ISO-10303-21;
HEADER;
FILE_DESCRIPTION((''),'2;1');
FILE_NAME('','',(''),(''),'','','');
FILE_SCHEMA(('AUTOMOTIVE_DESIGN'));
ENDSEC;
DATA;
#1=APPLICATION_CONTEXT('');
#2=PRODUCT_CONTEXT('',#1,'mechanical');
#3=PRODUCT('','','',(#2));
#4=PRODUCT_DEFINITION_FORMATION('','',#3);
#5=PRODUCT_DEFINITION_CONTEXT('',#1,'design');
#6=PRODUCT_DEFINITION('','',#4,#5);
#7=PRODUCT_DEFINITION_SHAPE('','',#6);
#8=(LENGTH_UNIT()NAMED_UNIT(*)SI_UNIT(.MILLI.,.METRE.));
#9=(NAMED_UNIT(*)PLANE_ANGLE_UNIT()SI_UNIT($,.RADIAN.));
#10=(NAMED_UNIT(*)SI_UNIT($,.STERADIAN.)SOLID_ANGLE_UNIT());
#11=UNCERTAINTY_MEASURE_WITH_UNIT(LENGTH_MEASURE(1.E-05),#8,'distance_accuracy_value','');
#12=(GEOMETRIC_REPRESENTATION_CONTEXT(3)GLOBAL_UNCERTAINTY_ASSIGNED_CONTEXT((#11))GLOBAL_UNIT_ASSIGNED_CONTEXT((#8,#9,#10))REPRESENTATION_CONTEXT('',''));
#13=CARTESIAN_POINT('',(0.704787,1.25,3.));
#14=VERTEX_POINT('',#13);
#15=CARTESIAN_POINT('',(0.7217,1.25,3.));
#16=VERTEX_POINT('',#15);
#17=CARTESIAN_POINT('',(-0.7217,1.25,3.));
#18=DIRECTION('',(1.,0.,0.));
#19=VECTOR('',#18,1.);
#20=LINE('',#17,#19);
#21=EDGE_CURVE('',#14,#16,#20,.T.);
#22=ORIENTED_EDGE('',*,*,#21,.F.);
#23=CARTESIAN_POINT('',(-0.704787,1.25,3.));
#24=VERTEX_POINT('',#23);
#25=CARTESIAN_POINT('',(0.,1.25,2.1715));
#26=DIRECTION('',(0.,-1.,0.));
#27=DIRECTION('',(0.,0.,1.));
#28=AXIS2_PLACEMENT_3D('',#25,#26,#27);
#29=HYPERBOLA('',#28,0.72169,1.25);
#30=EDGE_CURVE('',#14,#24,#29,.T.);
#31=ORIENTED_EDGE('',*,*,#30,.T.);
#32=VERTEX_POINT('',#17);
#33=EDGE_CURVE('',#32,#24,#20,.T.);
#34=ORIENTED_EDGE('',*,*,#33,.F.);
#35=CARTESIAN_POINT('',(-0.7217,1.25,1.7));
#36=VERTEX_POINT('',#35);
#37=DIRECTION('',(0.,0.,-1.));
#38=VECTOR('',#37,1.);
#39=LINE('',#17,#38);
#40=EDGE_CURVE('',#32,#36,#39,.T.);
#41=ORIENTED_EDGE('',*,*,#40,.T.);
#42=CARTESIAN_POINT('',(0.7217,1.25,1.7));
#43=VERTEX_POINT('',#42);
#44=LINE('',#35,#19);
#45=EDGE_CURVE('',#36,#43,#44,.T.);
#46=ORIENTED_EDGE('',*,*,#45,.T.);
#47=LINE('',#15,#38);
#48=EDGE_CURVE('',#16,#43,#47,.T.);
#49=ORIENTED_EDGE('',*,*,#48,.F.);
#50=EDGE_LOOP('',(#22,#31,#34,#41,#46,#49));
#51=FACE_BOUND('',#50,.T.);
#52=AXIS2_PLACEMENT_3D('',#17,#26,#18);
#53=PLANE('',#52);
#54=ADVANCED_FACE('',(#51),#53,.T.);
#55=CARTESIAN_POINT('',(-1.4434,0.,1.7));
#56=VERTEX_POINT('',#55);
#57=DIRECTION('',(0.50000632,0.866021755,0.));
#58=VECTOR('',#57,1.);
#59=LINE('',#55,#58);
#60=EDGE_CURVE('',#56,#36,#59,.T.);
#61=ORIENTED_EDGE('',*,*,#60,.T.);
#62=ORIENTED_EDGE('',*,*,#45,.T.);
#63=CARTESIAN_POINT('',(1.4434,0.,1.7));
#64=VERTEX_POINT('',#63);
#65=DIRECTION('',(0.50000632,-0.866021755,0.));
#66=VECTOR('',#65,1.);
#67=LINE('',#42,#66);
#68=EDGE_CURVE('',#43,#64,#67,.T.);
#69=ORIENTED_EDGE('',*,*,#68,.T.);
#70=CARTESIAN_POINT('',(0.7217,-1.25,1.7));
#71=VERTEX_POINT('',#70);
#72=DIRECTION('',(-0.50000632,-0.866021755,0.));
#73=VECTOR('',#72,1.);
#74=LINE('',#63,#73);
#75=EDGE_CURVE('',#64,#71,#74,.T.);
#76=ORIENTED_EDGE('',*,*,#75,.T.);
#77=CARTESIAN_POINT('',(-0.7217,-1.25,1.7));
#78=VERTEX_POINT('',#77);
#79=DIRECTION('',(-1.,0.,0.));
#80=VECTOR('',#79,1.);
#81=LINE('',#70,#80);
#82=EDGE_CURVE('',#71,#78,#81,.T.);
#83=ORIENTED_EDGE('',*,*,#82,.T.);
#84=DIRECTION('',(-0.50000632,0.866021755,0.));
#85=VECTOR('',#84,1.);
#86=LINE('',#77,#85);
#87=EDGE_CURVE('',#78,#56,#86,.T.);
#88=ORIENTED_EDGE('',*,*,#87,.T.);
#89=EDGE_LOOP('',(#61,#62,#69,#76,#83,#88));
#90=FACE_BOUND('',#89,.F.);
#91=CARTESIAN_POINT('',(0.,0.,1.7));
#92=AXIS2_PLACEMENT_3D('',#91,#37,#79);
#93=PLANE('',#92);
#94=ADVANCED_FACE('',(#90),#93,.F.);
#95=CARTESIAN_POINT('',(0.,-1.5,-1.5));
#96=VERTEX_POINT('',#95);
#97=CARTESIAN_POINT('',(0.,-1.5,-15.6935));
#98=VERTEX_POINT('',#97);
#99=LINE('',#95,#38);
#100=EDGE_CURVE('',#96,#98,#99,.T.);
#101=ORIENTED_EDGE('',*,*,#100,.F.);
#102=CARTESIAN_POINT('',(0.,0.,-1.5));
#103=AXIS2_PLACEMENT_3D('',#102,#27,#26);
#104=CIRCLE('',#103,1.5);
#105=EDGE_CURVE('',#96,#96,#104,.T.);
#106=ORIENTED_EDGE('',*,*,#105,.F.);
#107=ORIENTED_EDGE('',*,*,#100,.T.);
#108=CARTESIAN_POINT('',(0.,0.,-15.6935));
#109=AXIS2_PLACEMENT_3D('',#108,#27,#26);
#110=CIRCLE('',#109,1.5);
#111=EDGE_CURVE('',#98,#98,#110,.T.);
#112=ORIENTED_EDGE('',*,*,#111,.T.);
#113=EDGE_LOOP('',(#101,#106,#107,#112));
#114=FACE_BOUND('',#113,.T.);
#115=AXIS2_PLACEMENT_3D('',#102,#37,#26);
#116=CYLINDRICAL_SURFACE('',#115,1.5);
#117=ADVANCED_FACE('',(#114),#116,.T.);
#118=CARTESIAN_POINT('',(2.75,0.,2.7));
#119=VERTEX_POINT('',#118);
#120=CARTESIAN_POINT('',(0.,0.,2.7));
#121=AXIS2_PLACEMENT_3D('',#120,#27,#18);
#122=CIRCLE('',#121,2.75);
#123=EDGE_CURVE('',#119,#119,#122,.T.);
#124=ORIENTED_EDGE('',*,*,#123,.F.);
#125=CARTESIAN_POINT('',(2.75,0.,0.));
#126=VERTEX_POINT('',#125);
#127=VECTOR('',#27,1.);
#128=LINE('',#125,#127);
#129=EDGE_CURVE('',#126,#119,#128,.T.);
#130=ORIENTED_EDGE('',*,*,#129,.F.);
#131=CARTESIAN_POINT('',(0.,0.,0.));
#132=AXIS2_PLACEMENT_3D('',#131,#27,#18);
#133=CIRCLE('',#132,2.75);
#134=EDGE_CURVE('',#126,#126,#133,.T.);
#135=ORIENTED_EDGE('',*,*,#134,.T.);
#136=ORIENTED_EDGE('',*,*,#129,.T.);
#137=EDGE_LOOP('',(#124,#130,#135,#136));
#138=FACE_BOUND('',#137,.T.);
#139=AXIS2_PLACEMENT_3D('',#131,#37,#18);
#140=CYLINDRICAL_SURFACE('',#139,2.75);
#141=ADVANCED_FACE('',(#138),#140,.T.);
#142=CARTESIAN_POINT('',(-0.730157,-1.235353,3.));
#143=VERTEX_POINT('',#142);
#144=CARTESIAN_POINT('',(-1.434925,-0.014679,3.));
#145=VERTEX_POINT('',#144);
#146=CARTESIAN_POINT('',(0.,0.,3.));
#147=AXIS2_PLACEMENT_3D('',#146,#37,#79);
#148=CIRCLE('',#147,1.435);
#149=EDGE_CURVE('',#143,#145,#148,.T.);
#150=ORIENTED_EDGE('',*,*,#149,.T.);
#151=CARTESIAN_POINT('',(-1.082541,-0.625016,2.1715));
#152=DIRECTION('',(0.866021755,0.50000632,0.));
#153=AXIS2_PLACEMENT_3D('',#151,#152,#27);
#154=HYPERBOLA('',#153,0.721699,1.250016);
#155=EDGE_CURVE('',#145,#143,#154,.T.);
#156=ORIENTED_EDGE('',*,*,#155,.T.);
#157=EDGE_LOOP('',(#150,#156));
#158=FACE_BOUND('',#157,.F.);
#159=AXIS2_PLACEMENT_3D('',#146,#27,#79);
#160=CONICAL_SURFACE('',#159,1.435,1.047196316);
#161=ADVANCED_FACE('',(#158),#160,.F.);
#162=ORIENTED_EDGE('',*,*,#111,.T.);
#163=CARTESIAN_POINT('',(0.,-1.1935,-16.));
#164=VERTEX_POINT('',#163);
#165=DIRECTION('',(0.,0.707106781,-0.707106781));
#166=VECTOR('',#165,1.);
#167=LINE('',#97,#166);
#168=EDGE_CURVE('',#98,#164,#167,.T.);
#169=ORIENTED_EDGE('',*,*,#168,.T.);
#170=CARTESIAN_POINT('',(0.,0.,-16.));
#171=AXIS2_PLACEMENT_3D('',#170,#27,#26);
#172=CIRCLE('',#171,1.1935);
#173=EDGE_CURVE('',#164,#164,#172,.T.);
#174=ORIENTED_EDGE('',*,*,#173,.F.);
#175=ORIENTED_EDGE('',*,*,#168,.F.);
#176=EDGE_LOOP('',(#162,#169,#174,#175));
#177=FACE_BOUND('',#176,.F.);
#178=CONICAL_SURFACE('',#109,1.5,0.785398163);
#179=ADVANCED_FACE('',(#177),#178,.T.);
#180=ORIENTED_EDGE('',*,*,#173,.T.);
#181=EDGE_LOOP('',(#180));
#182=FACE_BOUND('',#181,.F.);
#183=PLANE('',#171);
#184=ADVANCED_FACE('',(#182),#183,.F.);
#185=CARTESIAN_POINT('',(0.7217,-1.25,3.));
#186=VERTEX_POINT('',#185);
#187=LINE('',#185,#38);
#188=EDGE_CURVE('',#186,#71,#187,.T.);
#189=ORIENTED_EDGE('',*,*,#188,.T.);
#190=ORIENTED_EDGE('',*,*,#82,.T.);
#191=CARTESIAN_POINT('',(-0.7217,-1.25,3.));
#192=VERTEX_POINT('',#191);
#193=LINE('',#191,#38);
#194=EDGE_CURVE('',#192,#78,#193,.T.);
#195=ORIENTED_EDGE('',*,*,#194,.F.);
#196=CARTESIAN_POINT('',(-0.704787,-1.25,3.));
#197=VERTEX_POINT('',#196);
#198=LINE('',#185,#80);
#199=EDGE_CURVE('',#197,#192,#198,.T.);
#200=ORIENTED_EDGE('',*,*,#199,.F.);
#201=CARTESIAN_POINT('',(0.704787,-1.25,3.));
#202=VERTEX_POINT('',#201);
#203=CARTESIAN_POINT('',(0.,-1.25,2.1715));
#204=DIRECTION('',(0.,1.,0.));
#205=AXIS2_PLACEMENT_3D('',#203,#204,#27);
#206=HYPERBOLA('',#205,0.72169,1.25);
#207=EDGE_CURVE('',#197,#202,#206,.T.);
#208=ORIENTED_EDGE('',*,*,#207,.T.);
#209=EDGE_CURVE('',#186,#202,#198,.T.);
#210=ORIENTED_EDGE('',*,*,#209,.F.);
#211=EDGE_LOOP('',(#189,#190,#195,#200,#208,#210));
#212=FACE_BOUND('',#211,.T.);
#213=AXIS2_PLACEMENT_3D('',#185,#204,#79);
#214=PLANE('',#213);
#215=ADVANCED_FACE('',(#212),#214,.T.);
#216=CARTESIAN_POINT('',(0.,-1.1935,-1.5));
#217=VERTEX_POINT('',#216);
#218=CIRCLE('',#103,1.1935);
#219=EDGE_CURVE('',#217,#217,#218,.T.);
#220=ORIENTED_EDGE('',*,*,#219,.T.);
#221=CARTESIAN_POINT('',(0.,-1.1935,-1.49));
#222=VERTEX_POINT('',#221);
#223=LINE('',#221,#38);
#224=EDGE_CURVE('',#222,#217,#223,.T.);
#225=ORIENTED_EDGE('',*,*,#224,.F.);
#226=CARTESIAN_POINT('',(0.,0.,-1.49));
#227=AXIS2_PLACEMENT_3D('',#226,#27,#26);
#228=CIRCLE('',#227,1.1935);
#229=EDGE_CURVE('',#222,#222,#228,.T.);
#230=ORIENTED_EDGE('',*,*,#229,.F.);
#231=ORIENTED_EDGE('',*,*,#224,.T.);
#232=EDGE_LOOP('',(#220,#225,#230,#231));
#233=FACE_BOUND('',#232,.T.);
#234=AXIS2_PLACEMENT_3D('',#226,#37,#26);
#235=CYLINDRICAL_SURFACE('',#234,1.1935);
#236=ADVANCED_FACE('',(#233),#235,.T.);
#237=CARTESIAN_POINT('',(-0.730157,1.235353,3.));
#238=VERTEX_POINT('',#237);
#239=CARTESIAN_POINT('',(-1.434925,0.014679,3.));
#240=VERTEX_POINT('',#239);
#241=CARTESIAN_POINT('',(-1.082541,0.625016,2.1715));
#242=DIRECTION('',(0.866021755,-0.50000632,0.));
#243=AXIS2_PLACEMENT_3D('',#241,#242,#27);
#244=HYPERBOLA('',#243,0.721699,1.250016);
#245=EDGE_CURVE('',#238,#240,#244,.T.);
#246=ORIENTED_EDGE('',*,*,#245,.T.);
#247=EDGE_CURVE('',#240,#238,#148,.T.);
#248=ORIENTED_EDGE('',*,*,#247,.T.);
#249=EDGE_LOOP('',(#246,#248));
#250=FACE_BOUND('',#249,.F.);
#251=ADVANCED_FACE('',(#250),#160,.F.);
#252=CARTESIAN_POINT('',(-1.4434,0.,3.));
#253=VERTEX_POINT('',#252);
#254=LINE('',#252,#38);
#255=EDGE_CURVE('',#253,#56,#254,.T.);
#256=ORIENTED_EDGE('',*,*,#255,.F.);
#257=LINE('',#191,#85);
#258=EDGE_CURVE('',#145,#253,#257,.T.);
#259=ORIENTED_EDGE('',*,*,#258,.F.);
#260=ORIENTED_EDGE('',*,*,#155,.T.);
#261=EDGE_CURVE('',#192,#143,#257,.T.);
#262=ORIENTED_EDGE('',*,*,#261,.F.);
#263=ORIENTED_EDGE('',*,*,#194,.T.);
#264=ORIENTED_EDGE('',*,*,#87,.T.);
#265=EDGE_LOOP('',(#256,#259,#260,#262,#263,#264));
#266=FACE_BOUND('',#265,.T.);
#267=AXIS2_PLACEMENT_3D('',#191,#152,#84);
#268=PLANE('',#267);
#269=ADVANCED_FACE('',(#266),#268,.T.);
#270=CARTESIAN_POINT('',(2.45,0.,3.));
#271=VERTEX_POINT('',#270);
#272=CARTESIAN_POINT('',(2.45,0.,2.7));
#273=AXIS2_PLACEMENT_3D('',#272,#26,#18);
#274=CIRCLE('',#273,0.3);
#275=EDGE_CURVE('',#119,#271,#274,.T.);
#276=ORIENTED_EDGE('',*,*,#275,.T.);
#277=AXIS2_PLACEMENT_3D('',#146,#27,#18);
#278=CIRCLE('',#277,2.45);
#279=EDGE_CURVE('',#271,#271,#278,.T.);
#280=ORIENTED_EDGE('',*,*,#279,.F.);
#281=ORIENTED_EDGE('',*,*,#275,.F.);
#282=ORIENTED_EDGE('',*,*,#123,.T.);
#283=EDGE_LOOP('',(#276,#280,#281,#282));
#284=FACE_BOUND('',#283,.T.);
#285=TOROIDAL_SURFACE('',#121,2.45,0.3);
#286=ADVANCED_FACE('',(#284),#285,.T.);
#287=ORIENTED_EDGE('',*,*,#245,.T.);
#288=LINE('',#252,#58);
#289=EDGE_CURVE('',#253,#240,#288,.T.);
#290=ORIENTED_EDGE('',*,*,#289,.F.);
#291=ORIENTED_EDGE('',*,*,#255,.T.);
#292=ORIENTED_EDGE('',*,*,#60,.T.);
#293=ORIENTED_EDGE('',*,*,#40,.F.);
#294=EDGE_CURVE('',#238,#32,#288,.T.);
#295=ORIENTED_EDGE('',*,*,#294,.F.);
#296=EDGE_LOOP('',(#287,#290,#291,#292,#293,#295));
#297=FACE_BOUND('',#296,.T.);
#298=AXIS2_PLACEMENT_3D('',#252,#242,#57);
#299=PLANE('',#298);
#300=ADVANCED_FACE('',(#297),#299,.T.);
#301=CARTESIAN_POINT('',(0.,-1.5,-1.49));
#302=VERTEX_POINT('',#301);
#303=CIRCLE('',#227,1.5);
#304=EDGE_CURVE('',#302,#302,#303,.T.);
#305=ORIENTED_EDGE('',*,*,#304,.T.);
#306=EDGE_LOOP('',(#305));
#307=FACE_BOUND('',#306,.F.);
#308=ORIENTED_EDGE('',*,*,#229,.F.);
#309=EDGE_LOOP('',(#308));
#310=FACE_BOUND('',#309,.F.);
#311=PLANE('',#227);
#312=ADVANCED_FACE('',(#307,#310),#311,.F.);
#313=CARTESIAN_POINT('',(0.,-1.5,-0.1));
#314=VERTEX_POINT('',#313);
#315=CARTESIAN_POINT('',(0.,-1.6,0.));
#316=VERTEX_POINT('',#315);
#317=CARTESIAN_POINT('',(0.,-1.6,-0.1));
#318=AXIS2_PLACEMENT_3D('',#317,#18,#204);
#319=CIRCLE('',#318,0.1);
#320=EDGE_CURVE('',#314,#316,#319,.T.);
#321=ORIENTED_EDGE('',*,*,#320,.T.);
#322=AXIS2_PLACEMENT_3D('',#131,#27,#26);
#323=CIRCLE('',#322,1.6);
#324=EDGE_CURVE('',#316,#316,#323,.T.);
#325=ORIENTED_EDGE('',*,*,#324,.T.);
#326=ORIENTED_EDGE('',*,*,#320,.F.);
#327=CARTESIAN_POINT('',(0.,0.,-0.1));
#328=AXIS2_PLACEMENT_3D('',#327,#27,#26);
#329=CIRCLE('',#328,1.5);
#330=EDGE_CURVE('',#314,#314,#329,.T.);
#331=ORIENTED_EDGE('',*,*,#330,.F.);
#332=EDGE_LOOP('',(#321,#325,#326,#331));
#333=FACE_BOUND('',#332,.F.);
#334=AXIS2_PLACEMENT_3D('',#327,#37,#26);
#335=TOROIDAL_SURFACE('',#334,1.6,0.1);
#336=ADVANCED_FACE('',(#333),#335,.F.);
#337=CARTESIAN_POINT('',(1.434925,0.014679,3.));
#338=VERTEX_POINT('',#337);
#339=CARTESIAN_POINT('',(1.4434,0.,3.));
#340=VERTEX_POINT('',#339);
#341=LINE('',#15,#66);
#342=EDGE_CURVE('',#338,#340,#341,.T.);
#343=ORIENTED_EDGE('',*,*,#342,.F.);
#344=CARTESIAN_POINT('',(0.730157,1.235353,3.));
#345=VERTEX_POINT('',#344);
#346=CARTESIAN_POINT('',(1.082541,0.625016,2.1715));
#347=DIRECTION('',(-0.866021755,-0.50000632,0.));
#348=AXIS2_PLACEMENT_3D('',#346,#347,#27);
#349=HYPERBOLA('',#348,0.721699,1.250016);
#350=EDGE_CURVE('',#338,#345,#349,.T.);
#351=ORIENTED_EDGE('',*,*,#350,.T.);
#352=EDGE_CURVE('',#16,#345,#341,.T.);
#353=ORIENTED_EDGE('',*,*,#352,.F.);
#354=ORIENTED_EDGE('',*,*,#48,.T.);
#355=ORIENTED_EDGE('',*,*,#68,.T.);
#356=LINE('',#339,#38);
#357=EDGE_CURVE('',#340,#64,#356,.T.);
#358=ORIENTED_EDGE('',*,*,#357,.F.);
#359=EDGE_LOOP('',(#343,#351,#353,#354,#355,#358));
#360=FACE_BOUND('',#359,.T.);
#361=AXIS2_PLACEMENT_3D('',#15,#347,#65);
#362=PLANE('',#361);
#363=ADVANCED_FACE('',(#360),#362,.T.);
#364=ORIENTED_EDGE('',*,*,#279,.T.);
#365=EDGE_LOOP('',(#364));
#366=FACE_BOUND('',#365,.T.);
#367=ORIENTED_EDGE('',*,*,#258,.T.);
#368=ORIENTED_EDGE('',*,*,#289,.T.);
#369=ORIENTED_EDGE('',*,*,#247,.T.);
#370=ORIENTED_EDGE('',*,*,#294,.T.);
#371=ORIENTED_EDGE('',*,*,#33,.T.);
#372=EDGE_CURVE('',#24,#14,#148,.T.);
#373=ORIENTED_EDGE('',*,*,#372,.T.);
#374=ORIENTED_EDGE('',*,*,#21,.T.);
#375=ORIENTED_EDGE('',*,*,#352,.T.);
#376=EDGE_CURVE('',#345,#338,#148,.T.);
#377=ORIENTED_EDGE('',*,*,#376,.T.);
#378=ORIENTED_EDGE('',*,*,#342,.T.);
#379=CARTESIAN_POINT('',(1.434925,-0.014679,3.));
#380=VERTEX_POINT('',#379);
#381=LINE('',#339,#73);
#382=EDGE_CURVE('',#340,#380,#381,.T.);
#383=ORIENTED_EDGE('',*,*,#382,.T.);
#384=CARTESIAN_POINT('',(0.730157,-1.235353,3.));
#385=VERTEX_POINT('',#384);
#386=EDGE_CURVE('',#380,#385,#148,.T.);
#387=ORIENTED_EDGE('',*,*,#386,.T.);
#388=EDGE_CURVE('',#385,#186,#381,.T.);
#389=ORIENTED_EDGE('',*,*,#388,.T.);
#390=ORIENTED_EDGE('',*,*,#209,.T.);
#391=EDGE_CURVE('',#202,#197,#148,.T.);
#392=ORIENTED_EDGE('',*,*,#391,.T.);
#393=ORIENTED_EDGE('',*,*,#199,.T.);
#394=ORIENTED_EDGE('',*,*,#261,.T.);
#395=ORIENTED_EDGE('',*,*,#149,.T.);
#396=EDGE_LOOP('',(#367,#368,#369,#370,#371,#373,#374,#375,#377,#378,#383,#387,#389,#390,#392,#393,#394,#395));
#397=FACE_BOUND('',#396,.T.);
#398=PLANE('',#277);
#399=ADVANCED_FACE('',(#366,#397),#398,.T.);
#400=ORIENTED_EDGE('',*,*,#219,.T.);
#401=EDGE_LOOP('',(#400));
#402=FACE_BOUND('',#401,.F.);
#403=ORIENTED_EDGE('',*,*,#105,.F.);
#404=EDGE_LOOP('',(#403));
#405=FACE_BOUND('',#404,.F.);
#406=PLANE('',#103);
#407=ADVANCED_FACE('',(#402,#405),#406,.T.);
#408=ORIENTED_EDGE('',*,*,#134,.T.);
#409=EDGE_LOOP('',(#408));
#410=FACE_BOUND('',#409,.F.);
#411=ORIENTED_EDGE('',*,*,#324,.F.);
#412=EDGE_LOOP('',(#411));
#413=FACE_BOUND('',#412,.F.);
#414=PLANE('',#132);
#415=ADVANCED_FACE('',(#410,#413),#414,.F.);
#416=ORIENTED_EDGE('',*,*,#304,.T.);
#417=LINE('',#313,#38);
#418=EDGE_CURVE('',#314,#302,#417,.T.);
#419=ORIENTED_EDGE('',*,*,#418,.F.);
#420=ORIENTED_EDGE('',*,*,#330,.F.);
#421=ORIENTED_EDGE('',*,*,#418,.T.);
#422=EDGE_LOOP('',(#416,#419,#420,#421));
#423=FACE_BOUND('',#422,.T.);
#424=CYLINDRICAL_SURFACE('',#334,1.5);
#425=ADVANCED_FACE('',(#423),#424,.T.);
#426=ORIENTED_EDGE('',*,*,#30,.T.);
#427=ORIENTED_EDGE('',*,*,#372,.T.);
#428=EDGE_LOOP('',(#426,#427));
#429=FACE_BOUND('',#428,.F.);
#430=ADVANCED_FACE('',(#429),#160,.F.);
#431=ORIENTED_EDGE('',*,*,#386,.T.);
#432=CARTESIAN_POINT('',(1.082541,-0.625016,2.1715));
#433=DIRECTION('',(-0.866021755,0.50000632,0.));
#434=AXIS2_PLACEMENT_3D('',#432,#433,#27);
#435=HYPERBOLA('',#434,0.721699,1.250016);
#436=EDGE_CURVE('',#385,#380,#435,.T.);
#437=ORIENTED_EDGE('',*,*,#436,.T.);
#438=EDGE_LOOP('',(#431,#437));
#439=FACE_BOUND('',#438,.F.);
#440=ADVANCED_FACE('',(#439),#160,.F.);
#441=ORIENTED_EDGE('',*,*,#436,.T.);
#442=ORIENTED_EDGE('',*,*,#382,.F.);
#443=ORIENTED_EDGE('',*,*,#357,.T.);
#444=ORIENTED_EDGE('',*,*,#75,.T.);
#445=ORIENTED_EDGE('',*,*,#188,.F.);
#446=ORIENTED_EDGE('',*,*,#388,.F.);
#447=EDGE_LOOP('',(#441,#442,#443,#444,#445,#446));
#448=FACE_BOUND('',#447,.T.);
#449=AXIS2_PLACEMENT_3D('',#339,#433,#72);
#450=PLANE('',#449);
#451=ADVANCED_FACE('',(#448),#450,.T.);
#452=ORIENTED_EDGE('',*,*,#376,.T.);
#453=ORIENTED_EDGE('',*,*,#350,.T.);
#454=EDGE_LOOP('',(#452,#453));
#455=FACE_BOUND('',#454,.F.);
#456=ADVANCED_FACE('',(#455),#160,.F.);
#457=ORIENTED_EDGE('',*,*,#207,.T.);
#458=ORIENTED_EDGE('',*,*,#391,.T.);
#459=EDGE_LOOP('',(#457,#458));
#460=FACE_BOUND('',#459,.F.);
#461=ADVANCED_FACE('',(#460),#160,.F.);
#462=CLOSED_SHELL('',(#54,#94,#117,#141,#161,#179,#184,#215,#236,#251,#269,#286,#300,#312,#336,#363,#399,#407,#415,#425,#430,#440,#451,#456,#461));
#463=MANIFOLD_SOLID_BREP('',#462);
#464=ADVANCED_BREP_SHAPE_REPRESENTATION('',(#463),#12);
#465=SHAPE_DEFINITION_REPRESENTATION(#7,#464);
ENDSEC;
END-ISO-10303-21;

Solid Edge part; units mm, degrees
sketch "Sketch1" plane through (0, 0, 0) normal (0, 0, 1) x (1, 0, 0)
  circle A0 centre (0, 0) radius 2.75
extrude "Protrusion1" add sketch "Sketch1" along normal blind 3
sketch "Sketch2" plane through (0, 0, 3) normal (0, 0, 1) x (0, 1, 0)
  line L0 (0, 1.4434) -> (1.25, 0.7217)
  line L1 (1.25, 0.7217) -> (1.25, -0.7217)
  line L2 (1.25, -0.7217) -> (0, -1.4434)
  line L3 (0, -1.4434) -> (-1.25, -0.7217)
  line L4 (-1.25, -0.7217) -> (-1.25, 0.7217)
  line L5 (-1.25, 0.7217) -> (0, 1.4434)
extrude "Cutout1" cut sketch "Sketch2" against normal blind 1.3
fillet "Round1" radius 0.3 1 edges at (-2.75, 0, 3)
sketch "Sketch3" plane through (0, 0, 0) normal (1, 0, 0) x (0, 1, 0)
  line L0 (-1.1935, -16) -> (0, -16)
  line L1 (-1.5, -15.6935) -> (-1.1935, -16)
  line L2 (-1.5, -1.5) -> (-1.5, -15.6935)
  line L3 (-1.1935, -1.5) -> (-1.5, -1.5)
  line L4 (-1.1935, -1.49) -> (-1.1935, -1.5)
  line L5 (-1.5, -1.49) -> (-1.1935, -1.49)
  line L6 (-1.5, -0.1) -> (-1.5, -1.49)
  arc A0 (-1.5, -0.1) -> (-1.6, 0) centre (-1.6, -0.1) ccw
  dimension "D1" = 1.5
  dimension "D2" = 0.01
  dimension "D3" = 0.1
  dimension "D4" = 16
revolve "RevolvedProtrusion1" add sketch "Sketch3" angle 360 about axis through (0, 0, -60.325) along (0, 0, 1) material side at (0, -0.5968, -15.95)
cosmetic_thread "Thread1" size "M3"
sketch "Sketch4" plane through (0, 0, 0) normal (0, -1, 0) x (1, 0, 0)
  line L0 (-1.435, 3) -> (0, 2.1715)
revolve "RevolvedCutout1" cut sketch "Sketch4" angle 360 about axis through (0, 0, 57.15) along (0, 0, -1) material side at (-0.6925, 0, 2.6291)
properties material "Stahl"
